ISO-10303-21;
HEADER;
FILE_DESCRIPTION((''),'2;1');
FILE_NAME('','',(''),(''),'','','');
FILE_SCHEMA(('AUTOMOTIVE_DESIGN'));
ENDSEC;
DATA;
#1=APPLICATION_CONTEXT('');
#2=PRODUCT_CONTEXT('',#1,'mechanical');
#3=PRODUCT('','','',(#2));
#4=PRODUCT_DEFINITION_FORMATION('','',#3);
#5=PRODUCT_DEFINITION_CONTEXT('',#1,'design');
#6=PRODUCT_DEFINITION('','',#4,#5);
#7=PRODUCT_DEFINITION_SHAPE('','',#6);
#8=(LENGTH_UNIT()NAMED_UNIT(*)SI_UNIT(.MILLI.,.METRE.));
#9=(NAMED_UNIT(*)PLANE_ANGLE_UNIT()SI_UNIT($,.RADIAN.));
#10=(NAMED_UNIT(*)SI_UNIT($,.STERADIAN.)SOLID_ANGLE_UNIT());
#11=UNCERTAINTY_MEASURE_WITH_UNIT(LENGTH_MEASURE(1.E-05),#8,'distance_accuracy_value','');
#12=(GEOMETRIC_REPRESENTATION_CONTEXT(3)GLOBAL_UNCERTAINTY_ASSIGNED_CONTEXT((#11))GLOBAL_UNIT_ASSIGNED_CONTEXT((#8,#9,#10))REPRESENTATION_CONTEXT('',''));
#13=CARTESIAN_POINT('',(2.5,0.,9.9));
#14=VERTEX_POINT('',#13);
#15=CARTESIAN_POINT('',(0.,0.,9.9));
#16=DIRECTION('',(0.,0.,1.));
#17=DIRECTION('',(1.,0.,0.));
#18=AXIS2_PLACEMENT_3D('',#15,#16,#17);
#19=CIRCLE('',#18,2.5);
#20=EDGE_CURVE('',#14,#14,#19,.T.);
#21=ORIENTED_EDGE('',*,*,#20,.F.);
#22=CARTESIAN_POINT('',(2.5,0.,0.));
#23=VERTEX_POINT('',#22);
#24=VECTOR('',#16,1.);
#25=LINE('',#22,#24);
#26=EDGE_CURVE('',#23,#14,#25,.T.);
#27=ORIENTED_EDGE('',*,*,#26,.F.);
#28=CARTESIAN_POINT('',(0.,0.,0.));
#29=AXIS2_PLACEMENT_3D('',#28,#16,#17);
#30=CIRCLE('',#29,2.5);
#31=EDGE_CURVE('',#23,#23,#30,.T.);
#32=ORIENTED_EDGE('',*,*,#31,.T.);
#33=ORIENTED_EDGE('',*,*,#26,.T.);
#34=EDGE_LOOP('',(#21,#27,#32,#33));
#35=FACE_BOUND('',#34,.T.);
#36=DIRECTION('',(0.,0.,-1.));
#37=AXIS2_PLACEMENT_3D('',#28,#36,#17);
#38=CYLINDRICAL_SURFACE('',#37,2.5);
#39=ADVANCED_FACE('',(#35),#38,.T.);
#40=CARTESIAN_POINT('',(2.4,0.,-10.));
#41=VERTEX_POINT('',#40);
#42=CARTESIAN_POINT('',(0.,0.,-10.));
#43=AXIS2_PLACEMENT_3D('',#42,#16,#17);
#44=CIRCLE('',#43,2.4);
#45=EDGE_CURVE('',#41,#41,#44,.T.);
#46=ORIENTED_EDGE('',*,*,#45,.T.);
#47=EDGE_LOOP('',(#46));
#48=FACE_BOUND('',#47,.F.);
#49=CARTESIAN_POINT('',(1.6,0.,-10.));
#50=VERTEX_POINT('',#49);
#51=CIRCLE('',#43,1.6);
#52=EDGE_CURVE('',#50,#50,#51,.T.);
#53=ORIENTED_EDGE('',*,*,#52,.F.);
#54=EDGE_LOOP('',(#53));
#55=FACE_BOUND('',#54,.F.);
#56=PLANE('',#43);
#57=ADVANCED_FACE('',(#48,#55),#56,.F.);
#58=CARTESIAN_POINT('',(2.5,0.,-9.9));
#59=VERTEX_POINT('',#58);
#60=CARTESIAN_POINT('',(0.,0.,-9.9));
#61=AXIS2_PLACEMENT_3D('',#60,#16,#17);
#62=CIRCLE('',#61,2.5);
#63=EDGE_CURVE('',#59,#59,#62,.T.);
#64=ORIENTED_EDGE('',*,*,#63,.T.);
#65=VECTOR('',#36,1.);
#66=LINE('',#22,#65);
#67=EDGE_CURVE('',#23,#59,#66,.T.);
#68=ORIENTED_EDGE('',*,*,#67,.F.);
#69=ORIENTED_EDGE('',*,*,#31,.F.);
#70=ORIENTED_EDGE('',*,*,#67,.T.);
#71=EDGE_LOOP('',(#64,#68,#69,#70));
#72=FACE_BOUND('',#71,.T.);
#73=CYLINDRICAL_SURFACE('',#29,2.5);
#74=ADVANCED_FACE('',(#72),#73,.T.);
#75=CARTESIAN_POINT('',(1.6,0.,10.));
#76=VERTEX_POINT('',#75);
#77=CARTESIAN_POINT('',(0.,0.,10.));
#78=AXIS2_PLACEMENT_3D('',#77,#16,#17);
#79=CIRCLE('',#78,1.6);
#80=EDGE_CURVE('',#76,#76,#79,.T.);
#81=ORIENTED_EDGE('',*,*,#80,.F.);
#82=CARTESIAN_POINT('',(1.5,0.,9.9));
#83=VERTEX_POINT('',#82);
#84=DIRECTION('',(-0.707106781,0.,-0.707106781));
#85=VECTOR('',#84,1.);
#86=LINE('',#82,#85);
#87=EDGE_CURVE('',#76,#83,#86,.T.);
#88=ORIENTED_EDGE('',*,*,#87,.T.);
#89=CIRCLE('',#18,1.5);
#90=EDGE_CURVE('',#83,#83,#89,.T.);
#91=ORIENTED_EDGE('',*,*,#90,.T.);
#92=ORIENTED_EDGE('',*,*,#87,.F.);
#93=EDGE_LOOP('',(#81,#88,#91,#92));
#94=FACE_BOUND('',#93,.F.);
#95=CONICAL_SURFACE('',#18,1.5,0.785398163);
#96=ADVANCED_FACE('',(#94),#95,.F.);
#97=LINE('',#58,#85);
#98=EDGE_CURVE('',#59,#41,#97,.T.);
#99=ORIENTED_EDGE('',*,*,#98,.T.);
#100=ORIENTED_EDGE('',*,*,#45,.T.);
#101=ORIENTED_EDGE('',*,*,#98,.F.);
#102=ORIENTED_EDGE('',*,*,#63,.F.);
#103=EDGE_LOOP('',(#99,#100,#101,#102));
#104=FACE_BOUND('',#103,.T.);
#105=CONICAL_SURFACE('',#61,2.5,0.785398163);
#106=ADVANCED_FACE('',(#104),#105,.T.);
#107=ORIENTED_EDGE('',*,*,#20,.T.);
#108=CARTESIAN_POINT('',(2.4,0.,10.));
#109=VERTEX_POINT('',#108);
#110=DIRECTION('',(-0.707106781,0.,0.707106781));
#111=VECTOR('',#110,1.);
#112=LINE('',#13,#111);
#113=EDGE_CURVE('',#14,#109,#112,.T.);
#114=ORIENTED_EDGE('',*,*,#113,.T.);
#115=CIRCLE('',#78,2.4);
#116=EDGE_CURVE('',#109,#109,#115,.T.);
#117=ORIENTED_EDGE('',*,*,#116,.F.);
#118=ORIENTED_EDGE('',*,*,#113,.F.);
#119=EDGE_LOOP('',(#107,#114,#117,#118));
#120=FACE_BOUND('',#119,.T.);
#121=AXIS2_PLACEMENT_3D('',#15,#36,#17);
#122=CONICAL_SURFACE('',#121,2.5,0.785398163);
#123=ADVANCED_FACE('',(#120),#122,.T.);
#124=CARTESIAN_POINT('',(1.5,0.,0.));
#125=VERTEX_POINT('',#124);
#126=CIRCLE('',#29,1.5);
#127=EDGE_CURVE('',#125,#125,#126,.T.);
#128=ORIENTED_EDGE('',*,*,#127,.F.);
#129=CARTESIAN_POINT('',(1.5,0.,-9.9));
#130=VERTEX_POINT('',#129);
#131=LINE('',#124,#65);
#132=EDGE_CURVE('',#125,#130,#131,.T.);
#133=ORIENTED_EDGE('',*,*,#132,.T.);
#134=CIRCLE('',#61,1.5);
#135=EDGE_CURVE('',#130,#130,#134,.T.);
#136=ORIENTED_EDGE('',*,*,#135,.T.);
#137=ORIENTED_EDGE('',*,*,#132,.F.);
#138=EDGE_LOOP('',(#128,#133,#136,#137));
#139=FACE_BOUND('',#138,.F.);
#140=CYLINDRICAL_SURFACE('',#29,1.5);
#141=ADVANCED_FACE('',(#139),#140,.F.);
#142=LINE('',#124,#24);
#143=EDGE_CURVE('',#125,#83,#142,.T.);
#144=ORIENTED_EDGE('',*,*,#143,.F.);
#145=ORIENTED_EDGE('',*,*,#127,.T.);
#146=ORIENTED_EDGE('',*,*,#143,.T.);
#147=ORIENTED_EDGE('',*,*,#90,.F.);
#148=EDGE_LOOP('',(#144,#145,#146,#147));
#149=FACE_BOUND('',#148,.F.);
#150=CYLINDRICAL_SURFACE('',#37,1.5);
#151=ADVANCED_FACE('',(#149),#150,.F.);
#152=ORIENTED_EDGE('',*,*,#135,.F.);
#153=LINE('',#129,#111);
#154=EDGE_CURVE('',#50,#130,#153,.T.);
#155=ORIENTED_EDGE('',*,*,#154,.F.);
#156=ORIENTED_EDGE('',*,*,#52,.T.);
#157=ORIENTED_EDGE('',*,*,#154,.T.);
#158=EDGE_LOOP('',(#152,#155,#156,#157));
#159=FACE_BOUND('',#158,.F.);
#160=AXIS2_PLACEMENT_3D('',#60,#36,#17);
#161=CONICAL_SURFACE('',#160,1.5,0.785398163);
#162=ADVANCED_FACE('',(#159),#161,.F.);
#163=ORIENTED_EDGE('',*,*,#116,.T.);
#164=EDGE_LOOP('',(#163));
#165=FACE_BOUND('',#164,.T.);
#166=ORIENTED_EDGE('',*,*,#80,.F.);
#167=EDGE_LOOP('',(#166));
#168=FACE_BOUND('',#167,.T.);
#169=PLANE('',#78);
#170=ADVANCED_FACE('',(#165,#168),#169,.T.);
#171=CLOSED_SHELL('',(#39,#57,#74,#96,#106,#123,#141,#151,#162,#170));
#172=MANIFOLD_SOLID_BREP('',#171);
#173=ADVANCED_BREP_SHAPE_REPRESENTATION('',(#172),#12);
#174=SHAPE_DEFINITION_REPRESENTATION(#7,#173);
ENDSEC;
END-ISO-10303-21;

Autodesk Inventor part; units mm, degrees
ref_plane "YZ Plane" through (0, 0, 0) normal (1, 0, 0) x (0, 1, 0)
ref_plane "XZ Plane" through (0, 0, 0) normal (0, 1, 0) x (-1, 0, 0)
ref_plane "XY Plane" through (0, 0, 0) normal (0, 0, 1) x (1, 0, 0)
sketch "Sketch1" plane through (0, 0, 0) normal (0, 0, 1) x (1, 0, 0)
  circle A0 centre (0, 0) radius 2.5
  circle A1 centre (0, 0) radius 1.5
  dimension "d0" = 5
  dimension "d1" = 3
extrude "Extrusion1" add sketch "Sketch1" along normal mid plane 20
thread "Thread1" size "M3x0.5" class "6H" standard "ANSI Metric M Profile" length 10
thread "Thread2" size "M3x0.5" class "6H" standard "ANSI Metric M Profile" length 10
chamfer "Chamfer1" distance 0.1 angle 45 4 edges at (-2.5, 0, 10) (-1.5, 0, 10) (-1.5, 0, -10) (-2.5, 0, -10)
properties part number "M3 20mm Standoff" material "Aluminum 6061"
